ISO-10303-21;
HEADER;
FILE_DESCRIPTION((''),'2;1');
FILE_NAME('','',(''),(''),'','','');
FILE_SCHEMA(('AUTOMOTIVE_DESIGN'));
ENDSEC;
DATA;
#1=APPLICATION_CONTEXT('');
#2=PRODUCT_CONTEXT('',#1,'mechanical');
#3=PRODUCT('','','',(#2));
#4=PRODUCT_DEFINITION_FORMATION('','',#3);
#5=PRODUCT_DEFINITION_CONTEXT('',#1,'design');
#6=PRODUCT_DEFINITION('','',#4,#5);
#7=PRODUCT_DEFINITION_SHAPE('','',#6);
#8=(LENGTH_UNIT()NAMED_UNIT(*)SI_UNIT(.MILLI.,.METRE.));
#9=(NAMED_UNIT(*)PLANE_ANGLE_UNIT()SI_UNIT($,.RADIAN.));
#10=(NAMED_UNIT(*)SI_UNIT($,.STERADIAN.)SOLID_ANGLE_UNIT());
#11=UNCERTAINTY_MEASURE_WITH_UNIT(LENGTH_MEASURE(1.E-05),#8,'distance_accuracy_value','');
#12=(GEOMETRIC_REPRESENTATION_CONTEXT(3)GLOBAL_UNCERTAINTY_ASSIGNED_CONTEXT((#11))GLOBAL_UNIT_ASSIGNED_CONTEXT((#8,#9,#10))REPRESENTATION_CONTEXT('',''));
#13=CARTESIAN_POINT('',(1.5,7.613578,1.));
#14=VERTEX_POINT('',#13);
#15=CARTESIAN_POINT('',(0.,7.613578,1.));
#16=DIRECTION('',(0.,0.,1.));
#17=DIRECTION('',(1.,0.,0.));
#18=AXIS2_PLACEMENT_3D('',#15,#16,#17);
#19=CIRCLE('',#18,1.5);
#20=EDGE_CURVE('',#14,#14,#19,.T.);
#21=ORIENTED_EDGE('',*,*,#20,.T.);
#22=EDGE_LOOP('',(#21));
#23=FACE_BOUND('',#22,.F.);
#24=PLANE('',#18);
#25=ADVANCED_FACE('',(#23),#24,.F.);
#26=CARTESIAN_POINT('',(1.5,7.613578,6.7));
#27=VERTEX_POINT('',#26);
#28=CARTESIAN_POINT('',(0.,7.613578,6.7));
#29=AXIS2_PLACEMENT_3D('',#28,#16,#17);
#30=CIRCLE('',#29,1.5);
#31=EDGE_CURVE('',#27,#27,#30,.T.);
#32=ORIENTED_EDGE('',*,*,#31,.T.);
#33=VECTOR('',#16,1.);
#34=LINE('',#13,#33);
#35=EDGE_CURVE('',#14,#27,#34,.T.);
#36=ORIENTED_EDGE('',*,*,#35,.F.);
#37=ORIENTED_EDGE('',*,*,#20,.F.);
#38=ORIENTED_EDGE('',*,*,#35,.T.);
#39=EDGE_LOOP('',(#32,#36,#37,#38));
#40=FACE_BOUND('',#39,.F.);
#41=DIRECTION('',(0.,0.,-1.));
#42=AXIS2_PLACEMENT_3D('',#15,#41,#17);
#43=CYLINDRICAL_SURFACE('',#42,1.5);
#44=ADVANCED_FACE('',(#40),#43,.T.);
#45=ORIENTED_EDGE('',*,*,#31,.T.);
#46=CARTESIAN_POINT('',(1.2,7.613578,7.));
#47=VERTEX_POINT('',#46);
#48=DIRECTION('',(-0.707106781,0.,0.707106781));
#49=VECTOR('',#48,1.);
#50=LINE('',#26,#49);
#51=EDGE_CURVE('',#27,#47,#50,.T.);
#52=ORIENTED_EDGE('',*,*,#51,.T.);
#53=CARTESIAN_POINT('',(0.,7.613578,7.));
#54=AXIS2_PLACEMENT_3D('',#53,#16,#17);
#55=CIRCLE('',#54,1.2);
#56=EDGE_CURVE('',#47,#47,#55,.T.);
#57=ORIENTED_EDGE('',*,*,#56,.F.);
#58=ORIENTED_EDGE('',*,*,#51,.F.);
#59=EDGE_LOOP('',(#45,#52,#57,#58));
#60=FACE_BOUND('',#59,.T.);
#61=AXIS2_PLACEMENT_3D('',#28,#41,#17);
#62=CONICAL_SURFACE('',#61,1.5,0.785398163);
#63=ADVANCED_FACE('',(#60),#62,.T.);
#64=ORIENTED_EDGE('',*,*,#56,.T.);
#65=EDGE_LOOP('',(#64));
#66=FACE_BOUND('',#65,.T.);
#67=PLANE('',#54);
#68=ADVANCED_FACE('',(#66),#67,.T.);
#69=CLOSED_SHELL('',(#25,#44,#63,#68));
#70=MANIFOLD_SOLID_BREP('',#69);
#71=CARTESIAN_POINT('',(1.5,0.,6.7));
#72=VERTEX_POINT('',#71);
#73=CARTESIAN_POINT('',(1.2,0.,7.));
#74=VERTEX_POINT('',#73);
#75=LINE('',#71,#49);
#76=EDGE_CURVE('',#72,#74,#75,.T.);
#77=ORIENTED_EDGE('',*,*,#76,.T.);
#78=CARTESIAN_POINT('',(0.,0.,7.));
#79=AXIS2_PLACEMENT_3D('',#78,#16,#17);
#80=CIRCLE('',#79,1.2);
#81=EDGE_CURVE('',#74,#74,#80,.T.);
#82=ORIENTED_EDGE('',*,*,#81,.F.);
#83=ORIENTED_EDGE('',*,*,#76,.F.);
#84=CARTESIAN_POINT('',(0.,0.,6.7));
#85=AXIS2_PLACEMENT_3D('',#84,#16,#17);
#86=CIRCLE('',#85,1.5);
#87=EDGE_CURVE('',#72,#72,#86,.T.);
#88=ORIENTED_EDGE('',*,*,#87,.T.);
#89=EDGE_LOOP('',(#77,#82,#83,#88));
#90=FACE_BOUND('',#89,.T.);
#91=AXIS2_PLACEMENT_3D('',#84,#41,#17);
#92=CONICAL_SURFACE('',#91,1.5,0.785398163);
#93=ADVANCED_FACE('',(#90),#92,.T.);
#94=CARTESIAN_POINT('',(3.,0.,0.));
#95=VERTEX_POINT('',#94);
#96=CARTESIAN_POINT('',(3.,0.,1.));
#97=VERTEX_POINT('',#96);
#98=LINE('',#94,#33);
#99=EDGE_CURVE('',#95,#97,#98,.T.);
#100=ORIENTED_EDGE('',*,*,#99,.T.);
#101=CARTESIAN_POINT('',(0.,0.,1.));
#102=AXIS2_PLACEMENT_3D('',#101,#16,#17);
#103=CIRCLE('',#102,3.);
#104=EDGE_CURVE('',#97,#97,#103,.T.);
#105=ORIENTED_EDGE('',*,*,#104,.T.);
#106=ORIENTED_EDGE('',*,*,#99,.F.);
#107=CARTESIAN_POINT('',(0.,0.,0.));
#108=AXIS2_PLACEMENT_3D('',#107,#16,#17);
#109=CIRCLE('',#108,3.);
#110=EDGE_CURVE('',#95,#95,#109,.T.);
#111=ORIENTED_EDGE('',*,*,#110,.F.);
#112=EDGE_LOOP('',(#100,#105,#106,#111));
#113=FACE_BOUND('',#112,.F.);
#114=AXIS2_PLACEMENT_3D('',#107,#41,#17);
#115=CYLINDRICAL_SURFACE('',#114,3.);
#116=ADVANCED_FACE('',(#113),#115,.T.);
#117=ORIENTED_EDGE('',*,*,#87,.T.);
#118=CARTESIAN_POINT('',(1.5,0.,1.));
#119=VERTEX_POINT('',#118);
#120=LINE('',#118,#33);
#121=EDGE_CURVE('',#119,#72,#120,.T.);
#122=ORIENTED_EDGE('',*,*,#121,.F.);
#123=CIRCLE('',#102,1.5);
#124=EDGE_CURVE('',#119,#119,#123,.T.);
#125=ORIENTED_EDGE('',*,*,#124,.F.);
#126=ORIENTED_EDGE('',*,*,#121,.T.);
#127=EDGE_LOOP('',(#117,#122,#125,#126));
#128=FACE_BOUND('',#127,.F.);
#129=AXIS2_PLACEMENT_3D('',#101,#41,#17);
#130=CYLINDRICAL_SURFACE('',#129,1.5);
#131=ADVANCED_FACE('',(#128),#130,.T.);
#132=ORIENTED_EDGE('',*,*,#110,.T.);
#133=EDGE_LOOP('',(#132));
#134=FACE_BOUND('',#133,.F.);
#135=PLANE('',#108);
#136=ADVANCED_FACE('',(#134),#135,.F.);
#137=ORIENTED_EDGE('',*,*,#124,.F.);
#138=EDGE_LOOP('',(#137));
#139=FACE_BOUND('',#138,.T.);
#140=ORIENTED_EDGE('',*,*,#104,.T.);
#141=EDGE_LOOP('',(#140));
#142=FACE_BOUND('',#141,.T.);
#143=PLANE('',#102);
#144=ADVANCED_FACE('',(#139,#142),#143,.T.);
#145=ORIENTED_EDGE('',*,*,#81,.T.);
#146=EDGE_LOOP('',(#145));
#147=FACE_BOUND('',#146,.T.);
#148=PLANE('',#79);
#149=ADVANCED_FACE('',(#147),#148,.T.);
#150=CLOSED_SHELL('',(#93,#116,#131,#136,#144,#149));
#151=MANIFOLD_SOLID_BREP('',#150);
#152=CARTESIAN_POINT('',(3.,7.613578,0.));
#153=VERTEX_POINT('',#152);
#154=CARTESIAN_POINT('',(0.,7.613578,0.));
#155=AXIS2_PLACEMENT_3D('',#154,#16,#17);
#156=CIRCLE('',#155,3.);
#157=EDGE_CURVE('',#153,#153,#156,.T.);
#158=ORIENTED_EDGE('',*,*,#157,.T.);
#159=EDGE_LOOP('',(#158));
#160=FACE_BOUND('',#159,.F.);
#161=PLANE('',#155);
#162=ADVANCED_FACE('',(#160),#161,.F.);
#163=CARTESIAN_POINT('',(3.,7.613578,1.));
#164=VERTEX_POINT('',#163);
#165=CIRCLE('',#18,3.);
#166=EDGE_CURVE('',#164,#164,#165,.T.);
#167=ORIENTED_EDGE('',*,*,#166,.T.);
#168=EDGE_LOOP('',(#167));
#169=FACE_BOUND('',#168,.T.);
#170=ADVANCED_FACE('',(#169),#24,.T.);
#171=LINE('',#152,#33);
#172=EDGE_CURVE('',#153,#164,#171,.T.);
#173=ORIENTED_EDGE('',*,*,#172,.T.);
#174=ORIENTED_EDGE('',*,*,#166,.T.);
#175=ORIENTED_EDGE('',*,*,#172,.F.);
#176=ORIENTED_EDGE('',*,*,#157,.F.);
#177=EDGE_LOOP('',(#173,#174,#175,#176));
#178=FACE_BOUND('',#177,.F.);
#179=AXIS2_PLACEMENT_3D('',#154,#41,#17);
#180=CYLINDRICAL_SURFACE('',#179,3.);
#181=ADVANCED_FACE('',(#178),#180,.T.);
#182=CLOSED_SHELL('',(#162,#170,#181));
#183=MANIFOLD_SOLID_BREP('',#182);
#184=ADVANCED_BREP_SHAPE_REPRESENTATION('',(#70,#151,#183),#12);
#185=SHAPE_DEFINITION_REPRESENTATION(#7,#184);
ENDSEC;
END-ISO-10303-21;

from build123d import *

# Parameters (mm, degrees)
F0_R      = 3
F1_DEPTH  = 1
F2_R      = 1.5
F3_DEPTH  = 6
F4_SIZE   = 0.3
F4_2_SIZE = 0.3


with BuildPart() as f1:
    # F0 (on Top) → F1 (new body)
    with BuildSketch(Plane.XY):
        Circle(F0_R)
    extrude(amount=F1_DEPTH)

    # F2 (on face) → F3 (join)
    with BuildSketch(Plane.XY.offset(1)):
        Circle(F2_R)
    extrude(amount=F3_DEPTH)

    # F4
    f4_edges = [f1.edges().sort_by_distance(p)[0] for p in [
        (-1.5, 0, 7),
    ]]
    chamfer(f4_edges, length=F4_SIZE)


with BuildPart() as f1b:
    # F0 (on Top) → F1, piece 2 (new body)
    with BuildSketch(Plane.XY):
        with Locations((0, 7.61357788)):
            Circle(F0_R)
    extrude(amount=F1_DEPTH)


with BuildPart() as f3:
    # F2 (on face) → F3, piece 2 (new body)
    with BuildSketch(Plane.XY.offset(1)):
        with Locations((0, 7.61357788)):
            Circle(F2_R)
    extrude(amount=F3_DEPTH)

    # F4#2
    f4_2_edges = [f3.edges().sort_by_distance(p)[0] for p in [
        (-1.5, 7.613578, 7),
    ]]
    chamfer(f4_2_edges, length=F4_2_SIZE)


solid = Compound([f1.part, f1b.part, f3.part])
